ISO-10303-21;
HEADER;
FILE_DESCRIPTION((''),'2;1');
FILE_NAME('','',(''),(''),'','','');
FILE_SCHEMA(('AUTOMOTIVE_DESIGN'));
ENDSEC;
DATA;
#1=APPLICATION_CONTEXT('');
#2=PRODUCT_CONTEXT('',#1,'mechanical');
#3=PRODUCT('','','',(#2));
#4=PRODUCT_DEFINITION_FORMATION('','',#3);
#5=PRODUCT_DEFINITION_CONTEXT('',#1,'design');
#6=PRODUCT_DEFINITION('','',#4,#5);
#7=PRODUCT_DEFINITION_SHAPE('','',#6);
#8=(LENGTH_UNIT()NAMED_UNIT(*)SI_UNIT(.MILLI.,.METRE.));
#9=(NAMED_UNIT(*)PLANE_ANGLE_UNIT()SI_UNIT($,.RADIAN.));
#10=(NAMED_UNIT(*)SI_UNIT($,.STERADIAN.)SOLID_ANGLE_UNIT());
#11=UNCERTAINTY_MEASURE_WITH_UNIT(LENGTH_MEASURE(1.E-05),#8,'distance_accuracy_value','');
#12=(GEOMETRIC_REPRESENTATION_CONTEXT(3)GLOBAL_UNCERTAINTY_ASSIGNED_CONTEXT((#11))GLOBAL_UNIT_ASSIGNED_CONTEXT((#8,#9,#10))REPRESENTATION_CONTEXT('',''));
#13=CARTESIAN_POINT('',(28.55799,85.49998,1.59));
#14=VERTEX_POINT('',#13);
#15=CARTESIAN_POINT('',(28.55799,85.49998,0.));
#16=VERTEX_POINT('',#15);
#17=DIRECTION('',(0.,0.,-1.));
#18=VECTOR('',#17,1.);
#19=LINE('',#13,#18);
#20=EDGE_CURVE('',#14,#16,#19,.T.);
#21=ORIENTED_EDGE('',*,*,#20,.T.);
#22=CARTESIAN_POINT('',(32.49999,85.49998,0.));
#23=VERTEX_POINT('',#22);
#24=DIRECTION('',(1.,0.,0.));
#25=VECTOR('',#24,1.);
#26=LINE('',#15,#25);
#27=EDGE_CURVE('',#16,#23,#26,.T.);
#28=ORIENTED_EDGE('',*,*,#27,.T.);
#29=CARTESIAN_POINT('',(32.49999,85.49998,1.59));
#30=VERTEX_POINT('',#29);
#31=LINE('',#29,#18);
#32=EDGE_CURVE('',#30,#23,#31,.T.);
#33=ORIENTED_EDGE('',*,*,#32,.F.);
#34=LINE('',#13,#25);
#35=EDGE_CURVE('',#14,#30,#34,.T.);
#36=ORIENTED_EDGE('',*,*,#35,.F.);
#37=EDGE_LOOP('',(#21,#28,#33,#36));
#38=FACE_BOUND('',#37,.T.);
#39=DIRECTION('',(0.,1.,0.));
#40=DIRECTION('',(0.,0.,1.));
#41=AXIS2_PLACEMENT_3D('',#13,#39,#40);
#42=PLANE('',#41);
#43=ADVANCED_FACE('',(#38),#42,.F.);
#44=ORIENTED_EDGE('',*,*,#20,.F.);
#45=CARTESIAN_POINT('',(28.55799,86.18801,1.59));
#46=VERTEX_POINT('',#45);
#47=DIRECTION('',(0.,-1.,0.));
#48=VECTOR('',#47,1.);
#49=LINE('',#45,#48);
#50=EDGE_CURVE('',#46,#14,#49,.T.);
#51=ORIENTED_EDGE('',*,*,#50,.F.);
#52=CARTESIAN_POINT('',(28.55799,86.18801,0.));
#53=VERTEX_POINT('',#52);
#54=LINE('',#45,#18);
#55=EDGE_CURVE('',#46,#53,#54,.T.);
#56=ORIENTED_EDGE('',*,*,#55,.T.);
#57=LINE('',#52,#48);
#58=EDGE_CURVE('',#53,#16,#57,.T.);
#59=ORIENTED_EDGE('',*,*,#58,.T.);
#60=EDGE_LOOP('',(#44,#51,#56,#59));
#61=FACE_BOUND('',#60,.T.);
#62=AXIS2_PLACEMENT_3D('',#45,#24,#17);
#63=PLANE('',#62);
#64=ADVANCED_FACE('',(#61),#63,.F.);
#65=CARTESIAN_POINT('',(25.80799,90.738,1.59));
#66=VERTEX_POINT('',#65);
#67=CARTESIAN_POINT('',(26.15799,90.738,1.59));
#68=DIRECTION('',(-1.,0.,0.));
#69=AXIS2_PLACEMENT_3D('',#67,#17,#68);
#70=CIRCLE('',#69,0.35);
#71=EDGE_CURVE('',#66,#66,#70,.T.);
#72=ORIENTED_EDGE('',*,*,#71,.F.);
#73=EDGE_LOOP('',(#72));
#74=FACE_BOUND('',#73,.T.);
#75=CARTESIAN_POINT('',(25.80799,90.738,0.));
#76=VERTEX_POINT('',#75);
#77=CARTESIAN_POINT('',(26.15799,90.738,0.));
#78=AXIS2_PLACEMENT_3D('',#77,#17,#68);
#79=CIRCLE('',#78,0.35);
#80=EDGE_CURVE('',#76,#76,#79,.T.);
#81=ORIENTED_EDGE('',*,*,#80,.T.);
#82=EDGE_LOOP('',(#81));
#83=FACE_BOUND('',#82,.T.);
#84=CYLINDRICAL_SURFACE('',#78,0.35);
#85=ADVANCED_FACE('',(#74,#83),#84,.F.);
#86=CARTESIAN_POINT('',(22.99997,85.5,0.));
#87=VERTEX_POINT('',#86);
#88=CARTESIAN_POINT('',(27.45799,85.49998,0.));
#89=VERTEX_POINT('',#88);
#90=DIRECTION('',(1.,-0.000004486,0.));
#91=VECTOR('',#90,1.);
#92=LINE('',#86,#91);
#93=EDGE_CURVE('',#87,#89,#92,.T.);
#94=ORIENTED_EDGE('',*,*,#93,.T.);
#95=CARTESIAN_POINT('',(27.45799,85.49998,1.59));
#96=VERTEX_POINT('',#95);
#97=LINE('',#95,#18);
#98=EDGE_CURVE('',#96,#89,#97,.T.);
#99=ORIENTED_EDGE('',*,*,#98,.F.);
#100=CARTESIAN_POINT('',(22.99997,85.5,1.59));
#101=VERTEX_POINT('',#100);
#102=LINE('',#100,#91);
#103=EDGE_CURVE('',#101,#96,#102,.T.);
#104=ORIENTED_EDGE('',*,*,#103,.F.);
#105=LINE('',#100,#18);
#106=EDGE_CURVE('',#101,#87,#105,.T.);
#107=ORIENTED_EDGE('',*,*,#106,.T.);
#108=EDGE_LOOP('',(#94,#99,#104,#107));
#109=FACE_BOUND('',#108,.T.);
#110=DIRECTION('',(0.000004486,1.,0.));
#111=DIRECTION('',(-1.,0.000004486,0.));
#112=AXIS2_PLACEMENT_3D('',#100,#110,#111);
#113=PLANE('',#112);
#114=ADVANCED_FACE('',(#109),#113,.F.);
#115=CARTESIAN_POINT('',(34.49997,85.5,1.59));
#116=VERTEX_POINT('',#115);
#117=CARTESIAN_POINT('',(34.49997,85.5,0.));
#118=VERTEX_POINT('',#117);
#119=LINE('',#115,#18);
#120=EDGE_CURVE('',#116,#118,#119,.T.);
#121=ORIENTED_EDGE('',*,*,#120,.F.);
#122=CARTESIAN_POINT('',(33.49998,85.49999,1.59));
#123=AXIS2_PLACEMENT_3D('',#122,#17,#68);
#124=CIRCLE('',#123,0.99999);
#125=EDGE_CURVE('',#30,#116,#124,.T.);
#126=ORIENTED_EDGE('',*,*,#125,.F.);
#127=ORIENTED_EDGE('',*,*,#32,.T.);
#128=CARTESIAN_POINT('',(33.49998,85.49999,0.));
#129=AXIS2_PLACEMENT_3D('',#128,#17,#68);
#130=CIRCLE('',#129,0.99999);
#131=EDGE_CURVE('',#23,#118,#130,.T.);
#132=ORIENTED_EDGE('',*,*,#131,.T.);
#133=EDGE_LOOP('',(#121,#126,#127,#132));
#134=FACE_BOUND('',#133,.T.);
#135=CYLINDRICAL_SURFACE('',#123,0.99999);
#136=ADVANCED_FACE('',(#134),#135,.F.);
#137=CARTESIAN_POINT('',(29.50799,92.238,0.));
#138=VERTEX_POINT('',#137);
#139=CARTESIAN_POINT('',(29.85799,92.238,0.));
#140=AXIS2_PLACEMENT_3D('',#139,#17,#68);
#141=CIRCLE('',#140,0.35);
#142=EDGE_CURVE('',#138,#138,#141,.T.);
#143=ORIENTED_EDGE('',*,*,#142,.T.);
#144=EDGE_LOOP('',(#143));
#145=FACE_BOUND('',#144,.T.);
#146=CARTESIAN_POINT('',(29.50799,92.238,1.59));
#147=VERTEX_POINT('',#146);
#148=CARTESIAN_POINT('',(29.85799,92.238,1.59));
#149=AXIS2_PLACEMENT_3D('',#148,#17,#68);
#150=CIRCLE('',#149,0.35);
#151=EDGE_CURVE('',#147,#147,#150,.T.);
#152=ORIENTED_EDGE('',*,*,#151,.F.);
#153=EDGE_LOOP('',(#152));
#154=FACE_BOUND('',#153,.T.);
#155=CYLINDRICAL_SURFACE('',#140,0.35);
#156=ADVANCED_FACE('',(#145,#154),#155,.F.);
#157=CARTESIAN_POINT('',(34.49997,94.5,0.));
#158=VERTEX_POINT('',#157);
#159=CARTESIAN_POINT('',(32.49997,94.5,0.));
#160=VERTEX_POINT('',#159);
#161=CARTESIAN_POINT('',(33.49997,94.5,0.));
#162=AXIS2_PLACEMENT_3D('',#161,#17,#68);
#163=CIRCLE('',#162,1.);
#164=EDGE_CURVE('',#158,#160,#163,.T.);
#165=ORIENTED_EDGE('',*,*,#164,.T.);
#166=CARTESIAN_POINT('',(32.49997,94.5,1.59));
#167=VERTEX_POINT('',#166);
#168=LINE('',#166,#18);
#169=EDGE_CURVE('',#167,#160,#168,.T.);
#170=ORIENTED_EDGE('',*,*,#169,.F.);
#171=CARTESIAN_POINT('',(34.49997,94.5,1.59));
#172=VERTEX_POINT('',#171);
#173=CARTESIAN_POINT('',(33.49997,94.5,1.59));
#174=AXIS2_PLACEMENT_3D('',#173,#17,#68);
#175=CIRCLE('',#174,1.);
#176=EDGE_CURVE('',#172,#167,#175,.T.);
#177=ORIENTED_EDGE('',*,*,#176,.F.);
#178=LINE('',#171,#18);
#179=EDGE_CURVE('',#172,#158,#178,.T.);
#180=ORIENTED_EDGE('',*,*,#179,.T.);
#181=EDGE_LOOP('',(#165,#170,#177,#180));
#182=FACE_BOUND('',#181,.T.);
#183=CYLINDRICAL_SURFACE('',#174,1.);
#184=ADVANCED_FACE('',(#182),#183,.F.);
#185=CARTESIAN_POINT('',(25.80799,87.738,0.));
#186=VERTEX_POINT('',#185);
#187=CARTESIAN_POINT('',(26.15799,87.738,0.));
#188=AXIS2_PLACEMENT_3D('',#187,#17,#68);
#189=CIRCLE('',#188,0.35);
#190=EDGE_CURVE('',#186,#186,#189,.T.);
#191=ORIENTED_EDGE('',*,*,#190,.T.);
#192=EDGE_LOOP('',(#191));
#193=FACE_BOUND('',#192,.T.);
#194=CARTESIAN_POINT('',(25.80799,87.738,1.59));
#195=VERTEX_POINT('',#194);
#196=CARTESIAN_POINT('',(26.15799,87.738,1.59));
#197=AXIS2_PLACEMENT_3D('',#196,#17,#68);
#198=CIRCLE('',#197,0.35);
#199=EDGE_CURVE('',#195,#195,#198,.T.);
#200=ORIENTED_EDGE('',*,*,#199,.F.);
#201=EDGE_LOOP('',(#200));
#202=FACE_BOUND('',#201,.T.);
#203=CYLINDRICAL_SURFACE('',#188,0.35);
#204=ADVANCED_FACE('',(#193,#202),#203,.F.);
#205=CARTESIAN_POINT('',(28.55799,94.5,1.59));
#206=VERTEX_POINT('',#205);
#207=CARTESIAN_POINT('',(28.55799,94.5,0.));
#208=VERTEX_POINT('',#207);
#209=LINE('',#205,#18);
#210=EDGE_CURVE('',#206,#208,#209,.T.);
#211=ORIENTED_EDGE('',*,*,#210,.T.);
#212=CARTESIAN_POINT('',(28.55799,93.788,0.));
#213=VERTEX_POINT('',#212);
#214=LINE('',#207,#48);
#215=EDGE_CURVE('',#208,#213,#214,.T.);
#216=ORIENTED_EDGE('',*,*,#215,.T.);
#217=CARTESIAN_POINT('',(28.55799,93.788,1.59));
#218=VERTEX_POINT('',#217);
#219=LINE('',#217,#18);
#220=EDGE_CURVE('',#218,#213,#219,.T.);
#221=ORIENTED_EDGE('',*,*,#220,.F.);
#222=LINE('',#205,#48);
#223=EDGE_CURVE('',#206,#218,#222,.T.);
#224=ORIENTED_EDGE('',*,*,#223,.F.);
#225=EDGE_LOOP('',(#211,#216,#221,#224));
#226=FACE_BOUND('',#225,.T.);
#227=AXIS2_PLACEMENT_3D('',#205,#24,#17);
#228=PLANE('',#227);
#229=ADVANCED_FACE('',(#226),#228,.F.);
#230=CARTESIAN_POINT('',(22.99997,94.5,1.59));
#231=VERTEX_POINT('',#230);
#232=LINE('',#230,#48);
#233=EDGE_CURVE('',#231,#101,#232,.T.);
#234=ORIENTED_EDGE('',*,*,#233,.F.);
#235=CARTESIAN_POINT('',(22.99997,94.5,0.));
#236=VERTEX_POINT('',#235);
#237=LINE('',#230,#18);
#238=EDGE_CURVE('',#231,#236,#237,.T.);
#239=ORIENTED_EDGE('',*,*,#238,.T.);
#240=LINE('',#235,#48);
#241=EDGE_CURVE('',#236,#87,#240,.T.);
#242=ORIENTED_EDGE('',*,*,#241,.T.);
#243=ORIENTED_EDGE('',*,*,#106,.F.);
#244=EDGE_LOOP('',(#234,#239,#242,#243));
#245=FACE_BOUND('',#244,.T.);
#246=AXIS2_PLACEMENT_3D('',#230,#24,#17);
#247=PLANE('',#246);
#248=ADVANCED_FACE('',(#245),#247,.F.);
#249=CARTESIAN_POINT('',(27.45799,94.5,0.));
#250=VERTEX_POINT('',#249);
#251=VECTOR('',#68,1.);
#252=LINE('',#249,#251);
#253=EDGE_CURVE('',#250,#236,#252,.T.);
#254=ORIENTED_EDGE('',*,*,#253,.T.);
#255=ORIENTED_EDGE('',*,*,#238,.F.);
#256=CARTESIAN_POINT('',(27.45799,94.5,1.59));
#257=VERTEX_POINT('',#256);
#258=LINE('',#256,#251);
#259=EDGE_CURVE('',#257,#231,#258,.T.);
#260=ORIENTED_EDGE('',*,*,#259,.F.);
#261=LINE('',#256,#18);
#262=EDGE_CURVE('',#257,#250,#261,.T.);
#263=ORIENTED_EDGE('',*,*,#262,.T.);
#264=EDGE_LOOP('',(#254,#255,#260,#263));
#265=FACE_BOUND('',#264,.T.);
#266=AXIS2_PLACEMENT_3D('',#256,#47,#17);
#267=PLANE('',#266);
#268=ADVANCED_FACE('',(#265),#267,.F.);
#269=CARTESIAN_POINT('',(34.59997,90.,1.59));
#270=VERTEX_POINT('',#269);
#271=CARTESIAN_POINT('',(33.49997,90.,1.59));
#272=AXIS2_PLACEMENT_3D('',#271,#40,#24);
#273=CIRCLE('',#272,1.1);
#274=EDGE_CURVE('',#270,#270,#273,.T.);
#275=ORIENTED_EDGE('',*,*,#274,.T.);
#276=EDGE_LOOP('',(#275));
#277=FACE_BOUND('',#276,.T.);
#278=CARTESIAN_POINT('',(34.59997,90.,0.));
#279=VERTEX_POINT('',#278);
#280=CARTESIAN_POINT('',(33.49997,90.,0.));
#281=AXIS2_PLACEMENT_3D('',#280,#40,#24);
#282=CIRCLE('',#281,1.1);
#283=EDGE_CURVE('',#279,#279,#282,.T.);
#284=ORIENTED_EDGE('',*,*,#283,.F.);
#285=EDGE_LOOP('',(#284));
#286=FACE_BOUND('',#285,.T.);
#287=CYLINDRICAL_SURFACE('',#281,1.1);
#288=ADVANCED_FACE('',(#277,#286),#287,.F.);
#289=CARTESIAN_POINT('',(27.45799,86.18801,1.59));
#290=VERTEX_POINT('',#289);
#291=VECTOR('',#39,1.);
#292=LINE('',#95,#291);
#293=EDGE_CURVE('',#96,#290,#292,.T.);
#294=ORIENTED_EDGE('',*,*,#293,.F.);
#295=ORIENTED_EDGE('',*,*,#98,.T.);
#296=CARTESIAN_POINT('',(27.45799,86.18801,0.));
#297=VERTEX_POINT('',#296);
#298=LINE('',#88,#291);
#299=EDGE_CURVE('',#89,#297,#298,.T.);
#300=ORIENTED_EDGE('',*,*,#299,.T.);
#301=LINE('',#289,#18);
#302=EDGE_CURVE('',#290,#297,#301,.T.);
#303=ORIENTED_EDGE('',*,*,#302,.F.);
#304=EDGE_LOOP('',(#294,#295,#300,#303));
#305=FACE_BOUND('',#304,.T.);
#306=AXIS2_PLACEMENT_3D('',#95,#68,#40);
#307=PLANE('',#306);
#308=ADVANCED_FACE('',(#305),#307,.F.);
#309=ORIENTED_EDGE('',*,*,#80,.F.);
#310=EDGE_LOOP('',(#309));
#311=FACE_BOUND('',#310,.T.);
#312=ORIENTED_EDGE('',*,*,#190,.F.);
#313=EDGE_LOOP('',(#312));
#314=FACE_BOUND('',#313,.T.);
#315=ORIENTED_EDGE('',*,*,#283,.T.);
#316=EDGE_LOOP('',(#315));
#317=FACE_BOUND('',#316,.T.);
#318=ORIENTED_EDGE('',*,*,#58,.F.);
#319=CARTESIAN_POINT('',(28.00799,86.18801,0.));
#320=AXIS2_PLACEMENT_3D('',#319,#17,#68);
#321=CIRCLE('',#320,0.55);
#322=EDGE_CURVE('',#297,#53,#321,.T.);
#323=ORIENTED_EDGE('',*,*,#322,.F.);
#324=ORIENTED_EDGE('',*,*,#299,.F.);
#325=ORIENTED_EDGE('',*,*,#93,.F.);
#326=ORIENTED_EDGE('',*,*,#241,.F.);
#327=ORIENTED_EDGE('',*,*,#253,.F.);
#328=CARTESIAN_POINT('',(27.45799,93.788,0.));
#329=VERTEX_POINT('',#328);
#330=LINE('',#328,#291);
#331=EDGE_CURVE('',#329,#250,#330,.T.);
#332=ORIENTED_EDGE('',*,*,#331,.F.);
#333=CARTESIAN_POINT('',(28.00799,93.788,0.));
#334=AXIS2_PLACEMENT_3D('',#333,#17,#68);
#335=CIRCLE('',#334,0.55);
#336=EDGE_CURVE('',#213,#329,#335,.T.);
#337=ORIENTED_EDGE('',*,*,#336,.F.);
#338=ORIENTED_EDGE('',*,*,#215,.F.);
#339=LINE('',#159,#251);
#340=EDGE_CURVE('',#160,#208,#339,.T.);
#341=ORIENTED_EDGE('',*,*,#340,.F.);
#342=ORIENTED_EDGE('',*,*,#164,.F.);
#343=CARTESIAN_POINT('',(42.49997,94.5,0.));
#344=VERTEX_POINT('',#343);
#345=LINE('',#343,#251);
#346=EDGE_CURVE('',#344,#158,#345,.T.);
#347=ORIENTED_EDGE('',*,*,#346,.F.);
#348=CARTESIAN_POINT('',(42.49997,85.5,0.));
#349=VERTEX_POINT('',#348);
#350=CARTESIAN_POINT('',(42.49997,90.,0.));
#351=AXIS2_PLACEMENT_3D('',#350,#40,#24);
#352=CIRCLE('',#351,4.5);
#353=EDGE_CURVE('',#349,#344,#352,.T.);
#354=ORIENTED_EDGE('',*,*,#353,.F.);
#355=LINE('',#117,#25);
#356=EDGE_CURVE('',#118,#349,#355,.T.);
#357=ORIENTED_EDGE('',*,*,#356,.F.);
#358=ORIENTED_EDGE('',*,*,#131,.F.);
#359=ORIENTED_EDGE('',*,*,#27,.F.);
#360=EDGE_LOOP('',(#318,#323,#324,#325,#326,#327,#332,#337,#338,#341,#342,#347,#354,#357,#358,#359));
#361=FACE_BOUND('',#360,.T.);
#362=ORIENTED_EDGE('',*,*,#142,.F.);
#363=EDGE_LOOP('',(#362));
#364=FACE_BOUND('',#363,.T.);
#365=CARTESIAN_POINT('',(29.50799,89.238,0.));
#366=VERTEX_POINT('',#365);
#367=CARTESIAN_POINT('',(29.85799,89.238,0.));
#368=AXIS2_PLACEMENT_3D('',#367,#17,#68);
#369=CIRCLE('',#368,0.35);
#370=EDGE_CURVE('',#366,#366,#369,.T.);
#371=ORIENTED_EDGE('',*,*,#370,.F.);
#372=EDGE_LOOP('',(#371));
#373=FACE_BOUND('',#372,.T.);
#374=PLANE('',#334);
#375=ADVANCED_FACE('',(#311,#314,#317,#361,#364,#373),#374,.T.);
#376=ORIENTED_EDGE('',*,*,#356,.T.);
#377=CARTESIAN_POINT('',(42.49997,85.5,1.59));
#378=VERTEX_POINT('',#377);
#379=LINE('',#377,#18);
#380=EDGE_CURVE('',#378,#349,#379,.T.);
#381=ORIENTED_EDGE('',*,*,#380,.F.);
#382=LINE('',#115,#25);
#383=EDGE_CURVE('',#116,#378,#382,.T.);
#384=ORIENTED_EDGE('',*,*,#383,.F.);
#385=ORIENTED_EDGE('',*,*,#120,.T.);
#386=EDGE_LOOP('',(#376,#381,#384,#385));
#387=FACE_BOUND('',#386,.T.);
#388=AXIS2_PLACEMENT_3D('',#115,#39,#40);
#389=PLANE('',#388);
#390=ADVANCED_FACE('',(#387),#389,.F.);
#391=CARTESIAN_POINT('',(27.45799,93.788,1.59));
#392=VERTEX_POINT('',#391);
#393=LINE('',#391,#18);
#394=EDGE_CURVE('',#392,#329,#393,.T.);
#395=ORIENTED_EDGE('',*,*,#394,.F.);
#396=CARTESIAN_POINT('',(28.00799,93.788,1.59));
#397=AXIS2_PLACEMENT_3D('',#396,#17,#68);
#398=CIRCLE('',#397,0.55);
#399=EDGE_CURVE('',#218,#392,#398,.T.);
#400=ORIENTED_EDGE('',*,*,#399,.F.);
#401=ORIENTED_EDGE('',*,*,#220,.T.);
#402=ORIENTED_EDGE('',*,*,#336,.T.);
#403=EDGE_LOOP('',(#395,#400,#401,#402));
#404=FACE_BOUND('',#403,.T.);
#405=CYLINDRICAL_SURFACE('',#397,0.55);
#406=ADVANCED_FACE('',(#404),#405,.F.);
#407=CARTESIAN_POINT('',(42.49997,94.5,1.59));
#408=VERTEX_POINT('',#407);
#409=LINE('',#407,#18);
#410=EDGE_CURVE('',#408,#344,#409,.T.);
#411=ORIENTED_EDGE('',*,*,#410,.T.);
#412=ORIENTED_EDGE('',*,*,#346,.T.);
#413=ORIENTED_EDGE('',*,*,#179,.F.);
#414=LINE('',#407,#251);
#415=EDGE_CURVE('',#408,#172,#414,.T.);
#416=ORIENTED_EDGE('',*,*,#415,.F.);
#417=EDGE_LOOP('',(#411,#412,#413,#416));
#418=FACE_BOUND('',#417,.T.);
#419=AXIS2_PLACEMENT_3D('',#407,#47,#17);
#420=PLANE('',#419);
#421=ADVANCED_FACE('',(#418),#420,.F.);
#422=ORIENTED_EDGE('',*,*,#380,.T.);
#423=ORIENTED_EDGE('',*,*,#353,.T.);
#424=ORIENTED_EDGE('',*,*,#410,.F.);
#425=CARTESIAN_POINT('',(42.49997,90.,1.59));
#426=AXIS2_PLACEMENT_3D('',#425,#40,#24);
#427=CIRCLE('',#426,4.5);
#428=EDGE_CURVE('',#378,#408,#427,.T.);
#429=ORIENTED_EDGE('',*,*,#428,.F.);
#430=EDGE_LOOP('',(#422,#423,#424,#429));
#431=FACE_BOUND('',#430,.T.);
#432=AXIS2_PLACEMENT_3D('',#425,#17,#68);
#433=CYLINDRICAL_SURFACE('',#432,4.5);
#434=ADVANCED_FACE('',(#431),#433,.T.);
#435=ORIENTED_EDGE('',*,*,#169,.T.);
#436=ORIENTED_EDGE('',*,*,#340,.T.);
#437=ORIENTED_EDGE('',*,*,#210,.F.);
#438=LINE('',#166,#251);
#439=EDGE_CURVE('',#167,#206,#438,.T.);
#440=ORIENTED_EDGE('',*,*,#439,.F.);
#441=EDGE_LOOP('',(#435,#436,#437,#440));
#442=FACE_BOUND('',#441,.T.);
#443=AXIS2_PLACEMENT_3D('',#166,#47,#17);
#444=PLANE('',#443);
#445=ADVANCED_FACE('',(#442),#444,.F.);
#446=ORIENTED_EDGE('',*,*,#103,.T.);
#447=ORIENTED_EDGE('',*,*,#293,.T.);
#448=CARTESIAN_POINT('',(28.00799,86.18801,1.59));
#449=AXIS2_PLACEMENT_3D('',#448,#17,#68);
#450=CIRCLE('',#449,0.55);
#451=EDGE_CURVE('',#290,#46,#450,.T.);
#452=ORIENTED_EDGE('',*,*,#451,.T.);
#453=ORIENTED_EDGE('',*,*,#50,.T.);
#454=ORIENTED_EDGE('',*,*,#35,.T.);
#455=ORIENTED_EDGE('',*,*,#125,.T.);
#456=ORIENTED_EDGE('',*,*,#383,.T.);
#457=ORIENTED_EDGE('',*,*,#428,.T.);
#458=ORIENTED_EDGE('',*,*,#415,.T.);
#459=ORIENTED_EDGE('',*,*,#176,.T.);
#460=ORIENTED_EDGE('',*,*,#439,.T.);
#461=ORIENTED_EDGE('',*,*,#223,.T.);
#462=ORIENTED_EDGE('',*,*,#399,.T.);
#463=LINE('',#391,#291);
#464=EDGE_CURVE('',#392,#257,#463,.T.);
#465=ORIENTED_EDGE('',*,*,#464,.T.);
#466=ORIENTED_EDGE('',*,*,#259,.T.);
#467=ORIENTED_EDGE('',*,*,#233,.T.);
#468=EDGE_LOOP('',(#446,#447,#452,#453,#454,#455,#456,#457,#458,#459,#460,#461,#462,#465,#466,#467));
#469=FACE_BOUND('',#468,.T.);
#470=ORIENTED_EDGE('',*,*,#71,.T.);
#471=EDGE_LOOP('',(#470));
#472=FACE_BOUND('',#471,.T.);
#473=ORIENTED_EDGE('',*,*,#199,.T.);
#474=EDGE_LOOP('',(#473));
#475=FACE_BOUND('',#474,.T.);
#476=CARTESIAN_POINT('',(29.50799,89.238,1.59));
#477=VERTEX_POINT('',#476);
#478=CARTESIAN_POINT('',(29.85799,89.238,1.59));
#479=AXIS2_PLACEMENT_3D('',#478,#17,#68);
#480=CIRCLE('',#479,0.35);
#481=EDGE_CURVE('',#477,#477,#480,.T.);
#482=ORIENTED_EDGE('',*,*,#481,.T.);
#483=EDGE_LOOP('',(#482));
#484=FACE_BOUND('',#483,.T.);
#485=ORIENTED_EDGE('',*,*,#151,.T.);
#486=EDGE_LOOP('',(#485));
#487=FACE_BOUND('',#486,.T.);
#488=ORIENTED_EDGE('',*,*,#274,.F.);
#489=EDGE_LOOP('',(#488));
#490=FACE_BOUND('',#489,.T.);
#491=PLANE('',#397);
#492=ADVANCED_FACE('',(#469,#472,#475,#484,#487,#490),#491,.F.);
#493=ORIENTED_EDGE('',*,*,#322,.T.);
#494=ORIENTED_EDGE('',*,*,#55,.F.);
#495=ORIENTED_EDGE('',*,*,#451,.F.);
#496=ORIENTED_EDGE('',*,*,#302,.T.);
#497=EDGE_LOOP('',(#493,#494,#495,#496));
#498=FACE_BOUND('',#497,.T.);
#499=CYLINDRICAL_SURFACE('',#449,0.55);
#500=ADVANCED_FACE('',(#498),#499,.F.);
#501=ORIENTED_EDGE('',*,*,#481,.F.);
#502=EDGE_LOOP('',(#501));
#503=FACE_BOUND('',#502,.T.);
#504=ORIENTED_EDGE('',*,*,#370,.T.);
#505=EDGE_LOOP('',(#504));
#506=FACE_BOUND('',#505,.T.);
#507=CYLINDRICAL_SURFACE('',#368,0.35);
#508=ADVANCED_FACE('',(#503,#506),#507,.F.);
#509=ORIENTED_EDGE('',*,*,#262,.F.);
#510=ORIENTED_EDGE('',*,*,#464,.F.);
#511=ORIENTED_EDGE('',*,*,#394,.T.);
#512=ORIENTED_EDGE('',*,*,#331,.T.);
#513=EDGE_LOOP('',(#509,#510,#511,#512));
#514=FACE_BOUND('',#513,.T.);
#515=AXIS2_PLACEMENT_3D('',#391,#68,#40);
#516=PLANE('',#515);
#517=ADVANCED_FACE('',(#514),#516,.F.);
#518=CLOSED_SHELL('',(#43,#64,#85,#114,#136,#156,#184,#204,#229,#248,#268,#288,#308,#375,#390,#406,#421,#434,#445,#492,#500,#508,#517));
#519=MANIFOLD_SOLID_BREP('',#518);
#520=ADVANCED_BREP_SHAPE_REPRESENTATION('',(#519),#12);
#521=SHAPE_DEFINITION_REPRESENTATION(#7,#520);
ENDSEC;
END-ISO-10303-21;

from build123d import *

# Parameters (mm, degrees)
BOARD_DEPTH                        = 1.59
F_1_0_228_DIAMETER_HOLE1_OUTLINE_R = 0.35
F_1_0_228_DIAMETER_HOLE1_DEPTH     = 1.59
SKETCH4_R                          = 1.1
CUT_EXTRUDE1_DEPTH                 = 106.554608126


# Read off the part's stored shape, not the designer's step: #1 (0.228) Diameter Hole1
with BuildPart() as part:
    # Sketch1 → Board (new body)
    with BuildSketch(Plane.XY):
        with BuildLine():
            Line((27.45799, 93.788), (27.45799, 94.5))
            Line((27.45799, 94.5), (22.99997, 94.5))
            Line((22.99997, 94.5), (22.99997, 85.5))
            Line((22.99997, 85.5), (27.45799, 85.49998))
            Line((27.45799, 85.49998), (27.45799, 86.18801))
            ThreePointArc((27.45799, 86.18801), (28.00799, 86.73801), (28.55799, 86.18801))
            Line((28.55799, 86.18801), (28.55799, 85.49998))
            Line((28.55799, 85.49998), (32.49999, 85.49998))
            ThreePointArc((32.49999, 85.49998), (33.49997, 86.49998), (34.49997, 85.5))
            Line((34.49997, 85.5), (42.49997, 85.5))
            ThreePointArc((42.49997, 85.5), (46.999970177, 90), (42.49997, 94.5))
            Line((42.49997, 94.5), (34.49997, 94.5))
            ThreePointArc((34.49997, 94.5), (33.49997, 93.5), (32.49997, 94.5))
            Line((32.49997, 94.5), (28.55799, 94.5))
            Line((28.55799, 94.5), (28.55799, 93.788))
            ThreePointArc((28.55799, 93.788), (28.00799, 93.238), (27.45799, 93.788))
        make_face()
    extrude(amount=BOARD_DEPTH)

    # #1 (0.228) Diameter Hole1 outline → #1 (0.228) Diameter Hole1 (cut)
    with BuildSketch(Plane.XY):
        with Locations((29.85799, 92.238)):
            Circle(F_1_0_228_DIAMETER_HOLE1_OUTLINE_R)
        with Locations((26.15799, 90.738)):
            Circle(F_1_0_228_DIAMETER_HOLE1_OUTLINE_R)
        with Locations((29.85799, 89.238)):
            Circle(F_1_0_228_DIAMETER_HOLE1_OUTLINE_R)
        with Locations((26.15799, 87.738)):
            Circle(F_1_0_228_DIAMETER_HOLE1_OUTLINE_R)
    extrude(amount=F_1_0_228_DIAMETER_HOLE1_DEPTH, mode=Mode.SUBTRACT)

    # Sketch4 → Cut-Extrude1 (cut, through all)
    with BuildSketch(Plane.XY.offset(1.59)):
        with Locations((33.49997, 90)):
            Circle(SKETCH4_R)
    extrude(amount=-CUT_EXTRUDE1_DEPTH, mode=Mode.SUBTRACT)


solid = part.part
